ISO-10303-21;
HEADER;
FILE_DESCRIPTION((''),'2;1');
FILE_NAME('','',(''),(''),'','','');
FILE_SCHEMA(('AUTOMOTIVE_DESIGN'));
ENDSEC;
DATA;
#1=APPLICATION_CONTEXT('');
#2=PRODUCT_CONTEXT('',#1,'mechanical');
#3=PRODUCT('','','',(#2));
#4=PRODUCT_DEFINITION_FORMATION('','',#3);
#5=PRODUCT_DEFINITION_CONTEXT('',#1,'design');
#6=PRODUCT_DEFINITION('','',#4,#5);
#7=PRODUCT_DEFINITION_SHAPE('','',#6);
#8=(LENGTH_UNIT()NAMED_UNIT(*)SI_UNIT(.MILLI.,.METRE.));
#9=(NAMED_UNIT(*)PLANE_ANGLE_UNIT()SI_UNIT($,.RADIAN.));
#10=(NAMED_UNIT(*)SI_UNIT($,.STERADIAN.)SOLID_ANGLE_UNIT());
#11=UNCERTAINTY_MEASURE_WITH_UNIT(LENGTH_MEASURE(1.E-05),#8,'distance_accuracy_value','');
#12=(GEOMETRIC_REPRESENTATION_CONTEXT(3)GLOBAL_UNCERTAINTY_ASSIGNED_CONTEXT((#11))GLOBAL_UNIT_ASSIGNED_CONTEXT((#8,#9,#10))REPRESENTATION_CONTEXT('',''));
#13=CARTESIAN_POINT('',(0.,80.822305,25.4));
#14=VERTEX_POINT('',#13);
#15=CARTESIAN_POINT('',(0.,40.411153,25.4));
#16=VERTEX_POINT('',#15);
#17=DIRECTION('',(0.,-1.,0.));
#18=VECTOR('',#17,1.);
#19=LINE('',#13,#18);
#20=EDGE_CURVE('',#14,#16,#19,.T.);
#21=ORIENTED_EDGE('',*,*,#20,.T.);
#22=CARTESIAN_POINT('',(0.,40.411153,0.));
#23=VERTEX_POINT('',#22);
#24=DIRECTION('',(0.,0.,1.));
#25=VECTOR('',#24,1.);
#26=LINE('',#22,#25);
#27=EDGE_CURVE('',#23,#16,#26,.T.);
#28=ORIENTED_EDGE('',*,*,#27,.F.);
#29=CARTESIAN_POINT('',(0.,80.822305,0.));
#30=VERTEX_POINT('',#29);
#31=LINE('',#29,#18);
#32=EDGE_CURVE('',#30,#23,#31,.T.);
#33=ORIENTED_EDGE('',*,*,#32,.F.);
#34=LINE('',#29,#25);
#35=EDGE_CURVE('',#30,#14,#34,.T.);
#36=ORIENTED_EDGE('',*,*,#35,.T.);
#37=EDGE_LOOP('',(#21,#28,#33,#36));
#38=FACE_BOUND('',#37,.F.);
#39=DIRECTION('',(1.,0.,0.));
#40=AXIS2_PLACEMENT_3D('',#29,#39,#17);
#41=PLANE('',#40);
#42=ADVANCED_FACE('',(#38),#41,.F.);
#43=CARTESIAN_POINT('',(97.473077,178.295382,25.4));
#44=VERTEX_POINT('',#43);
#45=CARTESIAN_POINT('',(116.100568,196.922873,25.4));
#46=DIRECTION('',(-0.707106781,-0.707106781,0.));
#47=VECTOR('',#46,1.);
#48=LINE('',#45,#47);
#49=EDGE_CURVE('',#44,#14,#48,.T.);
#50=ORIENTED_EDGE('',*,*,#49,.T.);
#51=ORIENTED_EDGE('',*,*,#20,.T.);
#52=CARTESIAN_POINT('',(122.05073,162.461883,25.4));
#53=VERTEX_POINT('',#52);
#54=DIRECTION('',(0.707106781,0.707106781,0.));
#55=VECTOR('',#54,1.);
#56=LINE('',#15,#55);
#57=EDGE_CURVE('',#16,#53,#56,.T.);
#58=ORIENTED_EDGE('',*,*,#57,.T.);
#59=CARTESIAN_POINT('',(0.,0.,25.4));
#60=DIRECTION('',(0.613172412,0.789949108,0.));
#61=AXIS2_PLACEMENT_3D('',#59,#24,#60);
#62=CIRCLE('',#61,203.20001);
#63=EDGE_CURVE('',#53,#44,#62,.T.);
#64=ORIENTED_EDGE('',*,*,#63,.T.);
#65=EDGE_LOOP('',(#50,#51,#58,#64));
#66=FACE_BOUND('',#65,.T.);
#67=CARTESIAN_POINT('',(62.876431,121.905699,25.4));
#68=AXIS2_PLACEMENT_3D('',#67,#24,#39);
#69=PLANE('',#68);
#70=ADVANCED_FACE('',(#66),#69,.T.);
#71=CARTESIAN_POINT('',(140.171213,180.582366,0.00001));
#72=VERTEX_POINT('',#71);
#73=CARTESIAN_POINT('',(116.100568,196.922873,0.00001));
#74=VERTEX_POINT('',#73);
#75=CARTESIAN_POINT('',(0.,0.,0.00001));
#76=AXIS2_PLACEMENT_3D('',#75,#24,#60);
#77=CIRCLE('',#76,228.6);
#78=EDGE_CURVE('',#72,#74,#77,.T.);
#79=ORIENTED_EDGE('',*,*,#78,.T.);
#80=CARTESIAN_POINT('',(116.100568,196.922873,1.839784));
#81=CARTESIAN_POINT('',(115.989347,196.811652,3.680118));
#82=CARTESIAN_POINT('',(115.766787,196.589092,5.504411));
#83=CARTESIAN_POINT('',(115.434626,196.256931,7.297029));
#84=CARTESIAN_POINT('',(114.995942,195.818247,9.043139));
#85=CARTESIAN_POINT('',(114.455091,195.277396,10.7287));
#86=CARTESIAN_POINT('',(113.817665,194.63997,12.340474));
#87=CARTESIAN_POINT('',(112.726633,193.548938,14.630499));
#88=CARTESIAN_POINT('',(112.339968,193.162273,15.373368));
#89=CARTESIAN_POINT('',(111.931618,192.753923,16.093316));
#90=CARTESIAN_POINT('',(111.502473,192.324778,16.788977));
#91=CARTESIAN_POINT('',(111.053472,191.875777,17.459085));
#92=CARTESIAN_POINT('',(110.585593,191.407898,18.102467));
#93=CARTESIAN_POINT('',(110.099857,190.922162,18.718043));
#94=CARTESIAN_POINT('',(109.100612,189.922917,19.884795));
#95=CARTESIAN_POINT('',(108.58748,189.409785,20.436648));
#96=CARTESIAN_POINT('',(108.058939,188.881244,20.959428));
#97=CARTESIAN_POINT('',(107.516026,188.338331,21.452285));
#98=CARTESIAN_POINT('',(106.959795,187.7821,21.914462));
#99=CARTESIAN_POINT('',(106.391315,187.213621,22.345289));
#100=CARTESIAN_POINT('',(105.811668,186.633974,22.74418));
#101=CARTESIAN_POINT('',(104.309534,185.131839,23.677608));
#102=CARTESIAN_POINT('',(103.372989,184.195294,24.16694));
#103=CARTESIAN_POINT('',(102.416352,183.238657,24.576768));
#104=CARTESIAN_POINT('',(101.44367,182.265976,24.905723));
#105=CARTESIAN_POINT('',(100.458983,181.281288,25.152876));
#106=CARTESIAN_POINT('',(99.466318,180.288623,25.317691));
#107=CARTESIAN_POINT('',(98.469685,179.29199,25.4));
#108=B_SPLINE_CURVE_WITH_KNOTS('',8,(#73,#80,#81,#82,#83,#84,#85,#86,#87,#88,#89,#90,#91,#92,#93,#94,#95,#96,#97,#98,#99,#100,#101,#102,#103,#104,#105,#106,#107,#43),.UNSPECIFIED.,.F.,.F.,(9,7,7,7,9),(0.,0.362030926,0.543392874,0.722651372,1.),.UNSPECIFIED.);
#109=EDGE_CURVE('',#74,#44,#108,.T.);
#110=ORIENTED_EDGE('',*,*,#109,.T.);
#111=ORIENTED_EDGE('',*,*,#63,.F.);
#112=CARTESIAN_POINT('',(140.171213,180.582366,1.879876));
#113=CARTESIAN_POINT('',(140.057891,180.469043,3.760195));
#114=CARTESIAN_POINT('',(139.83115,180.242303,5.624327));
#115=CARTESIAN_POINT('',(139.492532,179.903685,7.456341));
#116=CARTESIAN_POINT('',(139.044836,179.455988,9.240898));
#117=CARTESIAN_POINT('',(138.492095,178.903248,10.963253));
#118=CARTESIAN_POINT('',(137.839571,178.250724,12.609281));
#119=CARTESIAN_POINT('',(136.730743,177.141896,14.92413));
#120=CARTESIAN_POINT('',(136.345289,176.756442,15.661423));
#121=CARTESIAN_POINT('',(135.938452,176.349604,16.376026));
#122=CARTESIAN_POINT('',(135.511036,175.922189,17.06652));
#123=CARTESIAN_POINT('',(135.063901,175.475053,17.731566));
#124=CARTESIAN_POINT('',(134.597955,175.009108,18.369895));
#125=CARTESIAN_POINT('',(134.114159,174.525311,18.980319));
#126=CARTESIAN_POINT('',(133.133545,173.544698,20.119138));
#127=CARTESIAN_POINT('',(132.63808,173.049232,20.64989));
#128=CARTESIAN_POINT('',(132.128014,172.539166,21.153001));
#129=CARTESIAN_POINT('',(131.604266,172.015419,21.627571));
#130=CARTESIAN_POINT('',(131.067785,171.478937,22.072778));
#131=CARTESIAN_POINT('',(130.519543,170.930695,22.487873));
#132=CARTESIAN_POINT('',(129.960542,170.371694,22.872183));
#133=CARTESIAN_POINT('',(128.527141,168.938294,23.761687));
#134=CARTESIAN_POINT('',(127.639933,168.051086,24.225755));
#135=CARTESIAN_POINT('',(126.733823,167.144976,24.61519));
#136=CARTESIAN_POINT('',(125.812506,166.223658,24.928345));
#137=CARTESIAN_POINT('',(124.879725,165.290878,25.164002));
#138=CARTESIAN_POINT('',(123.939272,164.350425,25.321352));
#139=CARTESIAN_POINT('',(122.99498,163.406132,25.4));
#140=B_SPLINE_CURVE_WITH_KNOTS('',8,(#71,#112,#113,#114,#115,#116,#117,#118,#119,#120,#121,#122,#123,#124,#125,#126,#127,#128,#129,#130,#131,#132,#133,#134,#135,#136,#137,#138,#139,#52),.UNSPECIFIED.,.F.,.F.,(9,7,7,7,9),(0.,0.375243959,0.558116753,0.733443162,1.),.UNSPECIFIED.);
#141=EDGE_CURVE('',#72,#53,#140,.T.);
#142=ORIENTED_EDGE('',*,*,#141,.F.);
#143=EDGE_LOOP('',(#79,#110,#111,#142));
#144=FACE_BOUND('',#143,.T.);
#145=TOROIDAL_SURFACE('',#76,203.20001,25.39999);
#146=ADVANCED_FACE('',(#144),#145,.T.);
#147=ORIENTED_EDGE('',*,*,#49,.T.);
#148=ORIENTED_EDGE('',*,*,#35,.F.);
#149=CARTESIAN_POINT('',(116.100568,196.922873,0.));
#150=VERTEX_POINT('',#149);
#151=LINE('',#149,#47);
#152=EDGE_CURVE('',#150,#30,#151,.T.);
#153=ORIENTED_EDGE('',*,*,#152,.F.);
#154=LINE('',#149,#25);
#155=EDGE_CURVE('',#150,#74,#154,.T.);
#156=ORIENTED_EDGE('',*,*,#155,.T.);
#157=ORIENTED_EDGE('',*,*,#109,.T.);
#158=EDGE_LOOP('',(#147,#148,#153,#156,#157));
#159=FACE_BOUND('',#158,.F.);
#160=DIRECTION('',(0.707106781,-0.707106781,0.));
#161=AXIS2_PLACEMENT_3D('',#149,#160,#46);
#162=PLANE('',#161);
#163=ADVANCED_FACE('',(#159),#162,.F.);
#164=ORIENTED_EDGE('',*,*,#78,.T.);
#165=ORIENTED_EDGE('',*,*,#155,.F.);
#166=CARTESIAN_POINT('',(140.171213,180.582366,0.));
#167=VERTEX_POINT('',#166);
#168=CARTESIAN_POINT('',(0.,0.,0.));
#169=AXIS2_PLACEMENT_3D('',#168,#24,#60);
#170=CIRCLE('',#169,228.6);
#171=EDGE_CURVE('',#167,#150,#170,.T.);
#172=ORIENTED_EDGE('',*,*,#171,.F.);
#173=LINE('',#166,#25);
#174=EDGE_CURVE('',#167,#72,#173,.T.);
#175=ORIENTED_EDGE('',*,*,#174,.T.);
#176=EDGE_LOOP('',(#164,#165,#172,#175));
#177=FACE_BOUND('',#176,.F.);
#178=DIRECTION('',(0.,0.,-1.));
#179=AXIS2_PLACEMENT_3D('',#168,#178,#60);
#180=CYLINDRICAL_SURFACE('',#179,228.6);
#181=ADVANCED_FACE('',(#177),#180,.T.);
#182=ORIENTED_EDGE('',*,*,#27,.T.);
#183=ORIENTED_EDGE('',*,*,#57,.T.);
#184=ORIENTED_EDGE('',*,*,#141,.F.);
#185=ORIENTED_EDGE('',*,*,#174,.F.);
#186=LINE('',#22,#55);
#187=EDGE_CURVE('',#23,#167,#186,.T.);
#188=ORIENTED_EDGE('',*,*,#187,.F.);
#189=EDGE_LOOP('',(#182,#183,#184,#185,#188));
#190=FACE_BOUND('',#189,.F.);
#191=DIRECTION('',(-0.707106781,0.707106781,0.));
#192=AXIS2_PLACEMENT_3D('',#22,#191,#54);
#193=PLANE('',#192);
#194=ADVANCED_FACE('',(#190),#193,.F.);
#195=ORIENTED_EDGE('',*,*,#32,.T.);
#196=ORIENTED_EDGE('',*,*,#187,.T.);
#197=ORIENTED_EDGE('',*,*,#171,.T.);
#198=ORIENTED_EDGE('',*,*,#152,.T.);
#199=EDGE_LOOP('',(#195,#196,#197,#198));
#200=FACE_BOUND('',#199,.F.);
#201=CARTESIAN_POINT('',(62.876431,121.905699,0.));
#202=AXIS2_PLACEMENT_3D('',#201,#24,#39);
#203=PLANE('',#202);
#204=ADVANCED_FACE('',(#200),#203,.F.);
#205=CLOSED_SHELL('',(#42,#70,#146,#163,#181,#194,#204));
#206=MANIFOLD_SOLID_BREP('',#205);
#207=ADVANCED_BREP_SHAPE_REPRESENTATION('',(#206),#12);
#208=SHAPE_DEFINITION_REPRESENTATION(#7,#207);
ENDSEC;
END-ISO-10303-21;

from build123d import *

# Parameters (mm, degrees)
F2_DEPTH = 25.4
F3_R     = 25.39999


# Not quite as in the source:
# - a fillet or chamfer is up to 0.001 mm smaller than in the source, because OpenCascade refuses the exact size


with BuildPart() as f2:
    # F1 (on face) → F2 (new body)
    with BuildSketch(Plane.XY):
        with BuildLine():
            Line((0, 80.8223050896), (0, 40.4111525448))
            Line((0, 40.4111525448), (140.1712134682, 180.582366013))
            ThreePointArc((140.1712134682, 180.582366013), (128.3961041965, 189.1359310844), (116.1005682623, 196.9228733519))
            Line((116.1005682623, 196.9228733519), (0, 80.8223050896))
        make_face()
    extrude(amount=F2_DEPTH)

    # F3 (radius 25.4 in the source; OpenCascade refuses exactly that, so slightly less here)
    f3_edges = [f2.edges().sort_by_distance(p)[0] for p in [
        (128.396104, 189.135931, 25.4),
    ]]
    fillet(f3_edges, radius=F3_R)


solid = f2.part
